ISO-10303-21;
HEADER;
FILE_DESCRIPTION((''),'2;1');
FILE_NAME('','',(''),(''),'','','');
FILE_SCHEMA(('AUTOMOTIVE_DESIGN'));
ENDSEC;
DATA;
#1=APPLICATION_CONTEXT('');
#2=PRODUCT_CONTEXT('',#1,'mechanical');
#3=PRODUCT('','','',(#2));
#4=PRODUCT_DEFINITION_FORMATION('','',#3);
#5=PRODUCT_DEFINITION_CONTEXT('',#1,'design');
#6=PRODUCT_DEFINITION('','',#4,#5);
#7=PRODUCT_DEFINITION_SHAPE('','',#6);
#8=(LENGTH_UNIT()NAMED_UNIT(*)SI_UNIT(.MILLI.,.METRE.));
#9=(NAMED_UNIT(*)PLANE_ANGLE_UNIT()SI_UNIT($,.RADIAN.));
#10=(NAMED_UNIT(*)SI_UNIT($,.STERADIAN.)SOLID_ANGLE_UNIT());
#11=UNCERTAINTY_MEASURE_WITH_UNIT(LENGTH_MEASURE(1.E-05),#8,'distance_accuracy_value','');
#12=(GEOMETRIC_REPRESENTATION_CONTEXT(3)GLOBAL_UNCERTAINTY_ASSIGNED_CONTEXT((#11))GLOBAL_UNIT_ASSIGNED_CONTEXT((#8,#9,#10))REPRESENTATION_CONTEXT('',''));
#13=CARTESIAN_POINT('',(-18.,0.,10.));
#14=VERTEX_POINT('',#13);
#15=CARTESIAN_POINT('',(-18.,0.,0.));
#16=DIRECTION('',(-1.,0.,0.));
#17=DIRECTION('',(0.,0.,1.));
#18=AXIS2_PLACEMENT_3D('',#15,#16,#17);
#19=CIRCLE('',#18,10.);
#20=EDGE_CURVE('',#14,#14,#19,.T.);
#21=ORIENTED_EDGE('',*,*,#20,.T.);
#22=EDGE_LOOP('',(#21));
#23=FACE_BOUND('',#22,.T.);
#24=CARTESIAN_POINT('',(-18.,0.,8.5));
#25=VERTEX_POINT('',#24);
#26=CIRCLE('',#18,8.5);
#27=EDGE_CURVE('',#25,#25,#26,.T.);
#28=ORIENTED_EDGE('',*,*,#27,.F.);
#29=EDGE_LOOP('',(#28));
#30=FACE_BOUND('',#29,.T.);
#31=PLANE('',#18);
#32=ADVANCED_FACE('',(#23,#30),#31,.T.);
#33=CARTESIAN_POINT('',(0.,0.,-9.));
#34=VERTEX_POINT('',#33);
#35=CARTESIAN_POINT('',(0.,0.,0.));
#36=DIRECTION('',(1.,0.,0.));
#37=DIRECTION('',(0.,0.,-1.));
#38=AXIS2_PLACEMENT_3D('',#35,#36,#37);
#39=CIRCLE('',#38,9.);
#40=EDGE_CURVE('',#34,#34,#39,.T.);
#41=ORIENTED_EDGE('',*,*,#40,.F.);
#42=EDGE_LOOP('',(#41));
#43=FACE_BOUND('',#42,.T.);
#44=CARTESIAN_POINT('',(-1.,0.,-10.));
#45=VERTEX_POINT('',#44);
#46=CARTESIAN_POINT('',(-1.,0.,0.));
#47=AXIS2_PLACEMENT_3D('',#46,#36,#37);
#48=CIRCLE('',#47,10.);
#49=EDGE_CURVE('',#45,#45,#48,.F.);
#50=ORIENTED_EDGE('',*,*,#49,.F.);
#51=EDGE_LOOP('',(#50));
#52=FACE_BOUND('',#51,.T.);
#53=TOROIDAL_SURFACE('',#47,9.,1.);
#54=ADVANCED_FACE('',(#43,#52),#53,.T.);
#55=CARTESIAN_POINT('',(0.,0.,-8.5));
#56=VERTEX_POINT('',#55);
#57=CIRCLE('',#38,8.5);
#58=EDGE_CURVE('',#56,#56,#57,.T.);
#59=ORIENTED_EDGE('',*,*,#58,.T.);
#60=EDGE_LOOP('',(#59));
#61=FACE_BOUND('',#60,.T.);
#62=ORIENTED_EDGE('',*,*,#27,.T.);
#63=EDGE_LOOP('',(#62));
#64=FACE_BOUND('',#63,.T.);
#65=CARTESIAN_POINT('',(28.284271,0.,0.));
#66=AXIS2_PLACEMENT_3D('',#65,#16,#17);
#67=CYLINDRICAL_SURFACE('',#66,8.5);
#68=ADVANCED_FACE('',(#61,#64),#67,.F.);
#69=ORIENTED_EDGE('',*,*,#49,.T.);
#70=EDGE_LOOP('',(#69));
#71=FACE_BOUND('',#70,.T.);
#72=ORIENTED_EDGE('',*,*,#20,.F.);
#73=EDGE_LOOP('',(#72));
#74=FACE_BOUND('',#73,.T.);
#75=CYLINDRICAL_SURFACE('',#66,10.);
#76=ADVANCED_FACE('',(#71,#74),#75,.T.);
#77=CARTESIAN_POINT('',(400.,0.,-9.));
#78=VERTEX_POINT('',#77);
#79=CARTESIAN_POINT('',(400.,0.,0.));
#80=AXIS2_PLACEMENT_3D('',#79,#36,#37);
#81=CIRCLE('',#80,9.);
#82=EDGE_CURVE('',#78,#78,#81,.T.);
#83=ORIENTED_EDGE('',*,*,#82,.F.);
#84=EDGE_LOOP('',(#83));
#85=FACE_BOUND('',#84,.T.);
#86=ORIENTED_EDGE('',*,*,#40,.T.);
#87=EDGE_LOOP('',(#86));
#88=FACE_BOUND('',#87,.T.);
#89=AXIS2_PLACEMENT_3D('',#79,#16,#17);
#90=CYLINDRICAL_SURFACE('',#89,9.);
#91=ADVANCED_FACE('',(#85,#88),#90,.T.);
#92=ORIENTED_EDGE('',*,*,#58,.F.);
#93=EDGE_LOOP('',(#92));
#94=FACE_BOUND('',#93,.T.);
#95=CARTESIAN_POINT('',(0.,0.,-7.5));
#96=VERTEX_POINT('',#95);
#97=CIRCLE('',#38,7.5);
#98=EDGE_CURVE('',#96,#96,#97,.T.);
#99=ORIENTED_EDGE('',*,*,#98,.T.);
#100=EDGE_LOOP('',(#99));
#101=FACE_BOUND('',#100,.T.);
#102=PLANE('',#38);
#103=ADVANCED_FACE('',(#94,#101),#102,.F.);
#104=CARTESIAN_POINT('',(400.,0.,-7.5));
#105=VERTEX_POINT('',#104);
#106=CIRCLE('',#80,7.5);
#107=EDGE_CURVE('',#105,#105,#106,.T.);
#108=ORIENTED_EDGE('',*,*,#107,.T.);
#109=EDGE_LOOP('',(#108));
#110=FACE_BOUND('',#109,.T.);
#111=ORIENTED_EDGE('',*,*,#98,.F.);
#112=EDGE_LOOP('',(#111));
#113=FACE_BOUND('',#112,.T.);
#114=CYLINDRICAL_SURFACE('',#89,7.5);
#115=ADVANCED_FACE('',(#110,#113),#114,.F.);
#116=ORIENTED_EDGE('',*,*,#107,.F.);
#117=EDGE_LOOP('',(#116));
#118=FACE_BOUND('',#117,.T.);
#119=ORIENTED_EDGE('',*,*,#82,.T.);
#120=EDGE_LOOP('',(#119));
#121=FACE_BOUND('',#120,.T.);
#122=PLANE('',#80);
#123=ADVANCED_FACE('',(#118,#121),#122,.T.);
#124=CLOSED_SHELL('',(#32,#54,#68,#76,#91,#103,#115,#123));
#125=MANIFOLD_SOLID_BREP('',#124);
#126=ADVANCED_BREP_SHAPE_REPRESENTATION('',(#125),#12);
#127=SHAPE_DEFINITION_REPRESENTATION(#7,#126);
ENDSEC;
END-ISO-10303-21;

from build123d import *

# Parameters (mm, degrees)
SKETCH_1_R      = 9
SKETCH_1_R_2    = 7.5
EXTRUDE_2_DEPTH = 400
SKETCH_3_R      = 10
SKETCH_3_R_2    = 8.5
EXTRUDE_3_DEPTH = 18
FILLET_2_R      = 1


with BuildPart() as part:
    # 草圖1 → 填料-伸長2 (new body)
    with BuildSketch(Plane(origin=(0, 0, 0), x_dir=(0, 0, -1), z_dir=(1, 0, 0))):
        Circle(SKETCH_1_R)
        Circle(SKETCH_1_R_2, mode=Mode.SUBTRACT)
    extrude(amount=EXTRUDE_2_DEPTH)

    # 草圖3 → 填料-伸長3 (add)
    with BuildSketch(Plane.ZY.offset(18)):
        Circle(SKETCH_3_R)
        Circle(SKETCH_3_R_2, mode=Mode.SUBTRACT)
    extrude(amount=-EXTRUDE_3_DEPTH)

    # 圓角2
    fillet_2_edges = [part.edges().sort_by_distance(p)[0] for p in [
        (0, 0, -10),
    ]]
    fillet(fillet_2_edges, radius=FILLET_2_R - 0.0001)  # a hair under: the kernel refuses the full size


solid = part.part
